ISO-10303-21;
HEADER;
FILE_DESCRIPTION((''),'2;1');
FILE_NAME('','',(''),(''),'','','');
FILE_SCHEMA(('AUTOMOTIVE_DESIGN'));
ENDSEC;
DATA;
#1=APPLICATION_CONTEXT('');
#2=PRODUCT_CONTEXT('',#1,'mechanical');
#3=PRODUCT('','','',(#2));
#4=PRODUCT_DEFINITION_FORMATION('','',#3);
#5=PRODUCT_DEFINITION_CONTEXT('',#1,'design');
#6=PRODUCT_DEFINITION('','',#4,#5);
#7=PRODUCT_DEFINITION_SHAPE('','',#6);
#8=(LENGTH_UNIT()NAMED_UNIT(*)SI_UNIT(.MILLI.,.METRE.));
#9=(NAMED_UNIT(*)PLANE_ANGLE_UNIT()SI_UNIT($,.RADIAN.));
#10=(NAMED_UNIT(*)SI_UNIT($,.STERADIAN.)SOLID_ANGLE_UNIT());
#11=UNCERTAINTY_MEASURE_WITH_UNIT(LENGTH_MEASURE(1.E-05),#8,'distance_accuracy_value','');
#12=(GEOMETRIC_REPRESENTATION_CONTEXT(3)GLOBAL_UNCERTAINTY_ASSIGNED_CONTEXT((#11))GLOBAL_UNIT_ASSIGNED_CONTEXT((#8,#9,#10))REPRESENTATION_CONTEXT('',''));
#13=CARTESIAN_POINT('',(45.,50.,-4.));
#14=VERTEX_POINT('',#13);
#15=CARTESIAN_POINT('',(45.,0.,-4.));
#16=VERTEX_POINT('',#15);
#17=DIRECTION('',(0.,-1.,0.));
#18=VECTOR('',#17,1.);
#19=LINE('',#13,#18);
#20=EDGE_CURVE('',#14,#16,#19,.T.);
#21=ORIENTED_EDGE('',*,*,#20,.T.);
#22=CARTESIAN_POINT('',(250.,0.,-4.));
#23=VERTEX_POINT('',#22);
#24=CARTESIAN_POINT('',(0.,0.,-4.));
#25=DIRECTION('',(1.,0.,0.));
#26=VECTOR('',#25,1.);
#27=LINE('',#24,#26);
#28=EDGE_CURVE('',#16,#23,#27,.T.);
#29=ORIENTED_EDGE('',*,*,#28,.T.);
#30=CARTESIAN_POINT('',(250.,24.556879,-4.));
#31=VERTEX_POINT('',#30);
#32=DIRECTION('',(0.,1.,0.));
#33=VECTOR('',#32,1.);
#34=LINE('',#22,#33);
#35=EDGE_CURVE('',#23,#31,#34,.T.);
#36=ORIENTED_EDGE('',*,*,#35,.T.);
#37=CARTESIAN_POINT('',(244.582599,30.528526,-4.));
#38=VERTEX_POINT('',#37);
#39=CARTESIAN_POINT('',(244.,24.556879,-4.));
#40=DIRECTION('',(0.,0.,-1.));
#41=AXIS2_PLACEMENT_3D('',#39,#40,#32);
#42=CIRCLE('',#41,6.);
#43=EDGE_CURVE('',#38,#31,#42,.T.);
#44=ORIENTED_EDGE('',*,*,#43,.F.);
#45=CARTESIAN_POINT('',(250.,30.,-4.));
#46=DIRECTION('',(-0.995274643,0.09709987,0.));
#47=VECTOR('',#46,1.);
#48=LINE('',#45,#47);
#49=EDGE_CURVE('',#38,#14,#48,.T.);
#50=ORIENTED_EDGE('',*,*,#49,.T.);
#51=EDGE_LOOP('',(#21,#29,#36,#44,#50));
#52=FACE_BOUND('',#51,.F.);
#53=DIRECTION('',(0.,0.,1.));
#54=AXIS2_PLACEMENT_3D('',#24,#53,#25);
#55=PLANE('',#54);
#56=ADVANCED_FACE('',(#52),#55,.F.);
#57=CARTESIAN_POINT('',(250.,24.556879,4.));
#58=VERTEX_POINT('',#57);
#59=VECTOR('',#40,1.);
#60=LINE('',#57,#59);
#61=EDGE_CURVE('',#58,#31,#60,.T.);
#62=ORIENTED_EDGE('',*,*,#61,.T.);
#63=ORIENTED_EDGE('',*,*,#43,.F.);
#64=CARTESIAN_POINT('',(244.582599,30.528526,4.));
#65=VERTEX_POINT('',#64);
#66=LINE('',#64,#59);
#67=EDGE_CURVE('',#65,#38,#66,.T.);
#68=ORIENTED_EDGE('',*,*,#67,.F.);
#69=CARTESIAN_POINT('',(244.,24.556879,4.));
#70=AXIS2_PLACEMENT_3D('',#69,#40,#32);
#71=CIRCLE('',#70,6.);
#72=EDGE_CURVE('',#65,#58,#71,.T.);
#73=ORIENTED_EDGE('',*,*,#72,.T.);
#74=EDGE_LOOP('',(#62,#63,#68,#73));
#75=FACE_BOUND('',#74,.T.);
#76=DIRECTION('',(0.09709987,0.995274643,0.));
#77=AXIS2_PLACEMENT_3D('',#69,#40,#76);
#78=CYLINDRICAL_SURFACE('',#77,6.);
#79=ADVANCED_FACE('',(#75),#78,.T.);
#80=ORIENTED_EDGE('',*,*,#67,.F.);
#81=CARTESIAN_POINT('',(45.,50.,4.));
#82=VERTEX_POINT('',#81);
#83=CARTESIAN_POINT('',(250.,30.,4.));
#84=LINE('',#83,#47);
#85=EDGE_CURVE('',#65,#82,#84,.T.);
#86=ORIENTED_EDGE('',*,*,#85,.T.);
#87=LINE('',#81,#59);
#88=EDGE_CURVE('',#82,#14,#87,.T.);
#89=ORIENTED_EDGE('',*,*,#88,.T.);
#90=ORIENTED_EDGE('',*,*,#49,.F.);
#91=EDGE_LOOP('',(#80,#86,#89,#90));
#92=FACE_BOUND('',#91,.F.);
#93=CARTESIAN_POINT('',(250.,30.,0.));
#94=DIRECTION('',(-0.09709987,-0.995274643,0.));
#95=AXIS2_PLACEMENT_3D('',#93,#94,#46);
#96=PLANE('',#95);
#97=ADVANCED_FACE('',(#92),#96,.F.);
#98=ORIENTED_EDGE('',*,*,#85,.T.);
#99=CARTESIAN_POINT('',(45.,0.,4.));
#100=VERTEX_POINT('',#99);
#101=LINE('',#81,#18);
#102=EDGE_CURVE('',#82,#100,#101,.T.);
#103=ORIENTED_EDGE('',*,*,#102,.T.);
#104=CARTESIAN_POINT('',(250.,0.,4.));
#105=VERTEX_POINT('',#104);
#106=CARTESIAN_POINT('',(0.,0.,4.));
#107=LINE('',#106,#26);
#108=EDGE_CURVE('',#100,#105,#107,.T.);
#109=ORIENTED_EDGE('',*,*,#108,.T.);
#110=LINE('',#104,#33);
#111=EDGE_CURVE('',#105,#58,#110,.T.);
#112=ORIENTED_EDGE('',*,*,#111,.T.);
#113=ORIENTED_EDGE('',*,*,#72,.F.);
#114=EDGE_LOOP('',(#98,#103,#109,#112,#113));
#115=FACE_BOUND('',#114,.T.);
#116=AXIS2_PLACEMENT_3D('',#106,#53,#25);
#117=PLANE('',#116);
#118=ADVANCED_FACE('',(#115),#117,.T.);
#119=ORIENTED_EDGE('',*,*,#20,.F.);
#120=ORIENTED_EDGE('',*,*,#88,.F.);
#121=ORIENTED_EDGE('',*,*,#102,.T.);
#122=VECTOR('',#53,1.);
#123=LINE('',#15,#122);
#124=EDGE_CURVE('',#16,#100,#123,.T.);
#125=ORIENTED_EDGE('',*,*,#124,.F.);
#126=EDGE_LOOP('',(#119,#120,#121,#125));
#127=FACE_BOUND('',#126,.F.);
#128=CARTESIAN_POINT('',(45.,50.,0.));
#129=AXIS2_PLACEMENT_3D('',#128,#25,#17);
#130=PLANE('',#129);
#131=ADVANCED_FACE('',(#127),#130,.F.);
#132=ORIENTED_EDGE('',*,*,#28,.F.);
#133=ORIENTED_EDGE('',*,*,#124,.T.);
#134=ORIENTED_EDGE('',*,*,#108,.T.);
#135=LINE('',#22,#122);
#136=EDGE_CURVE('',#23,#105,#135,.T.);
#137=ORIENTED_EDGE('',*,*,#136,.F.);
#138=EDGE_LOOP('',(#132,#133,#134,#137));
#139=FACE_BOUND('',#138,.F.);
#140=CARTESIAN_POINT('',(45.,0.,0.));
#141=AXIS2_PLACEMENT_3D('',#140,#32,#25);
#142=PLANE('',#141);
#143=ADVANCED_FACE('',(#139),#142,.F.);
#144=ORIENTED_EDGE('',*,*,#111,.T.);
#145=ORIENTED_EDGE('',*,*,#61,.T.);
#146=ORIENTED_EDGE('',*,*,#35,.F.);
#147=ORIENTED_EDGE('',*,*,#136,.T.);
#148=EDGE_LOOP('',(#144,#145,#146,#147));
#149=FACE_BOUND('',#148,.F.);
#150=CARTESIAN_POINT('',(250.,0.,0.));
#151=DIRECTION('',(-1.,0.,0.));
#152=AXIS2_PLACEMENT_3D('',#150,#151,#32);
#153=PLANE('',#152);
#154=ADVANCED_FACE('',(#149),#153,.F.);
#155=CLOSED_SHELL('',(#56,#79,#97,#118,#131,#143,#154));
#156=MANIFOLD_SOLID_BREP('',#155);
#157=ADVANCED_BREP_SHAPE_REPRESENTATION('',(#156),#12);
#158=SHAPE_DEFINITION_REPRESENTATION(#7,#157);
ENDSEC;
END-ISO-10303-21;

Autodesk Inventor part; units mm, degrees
ref_plane "YZ Plane" through (0, 0, 0) normal (1, 0, 0) x (0, 1, 0)
ref_plane "XZ Plane" through (0, 0, 0) normal (0, 1, 0) x (-1, 0, 0)
ref_plane "XY Plane" through (0, 0, 0) normal (0, 0, 1) x (1, 0, 0)
sketch "Sketch3" plane through (0, 0, 0) normal (0, 0, 1) x (1, 0, 0)
  line L0 (0, 0) -> (250, 0)
  line L1 (250, 0) -> (250, 30)
  line L2 (250, 30) -> (-55.0321, 59.7592)
  line L3 (45, 50) -> (45, 0)
  dimension "d11" = 250
  dimension "d12" = 30
  dimension "d13" = 45
  dimension "d14" = 50
extrude "Plate1" add sketch "Sketch3" along normal mid plane 8
fillet "Corner Round1" radius 6 1 edges at (250, 30, 0)
equation "\"d15\" = Thickness"
equation "\"BendRadius\" = Thickness"
equation "\"BendReliefWidth\" = Thickness"
equation "\"BendReliefDepth\" = 0.5 * Thickness"
equation "\"CornerReliefSize\" = 4 * Thickness"
equation "\"MinimumRemnant\" = 2 * Thickness"
equation "\"TransitionRadius\" = BendRadius"
equation "\"JacobiRadiusSize\" = BendRadius"
equation "\"GapSize\" = Thickness"
equation "\"Thickness\" = 8"
properties part number "TZS 1213 charging hatch reinf" material "Steel"
